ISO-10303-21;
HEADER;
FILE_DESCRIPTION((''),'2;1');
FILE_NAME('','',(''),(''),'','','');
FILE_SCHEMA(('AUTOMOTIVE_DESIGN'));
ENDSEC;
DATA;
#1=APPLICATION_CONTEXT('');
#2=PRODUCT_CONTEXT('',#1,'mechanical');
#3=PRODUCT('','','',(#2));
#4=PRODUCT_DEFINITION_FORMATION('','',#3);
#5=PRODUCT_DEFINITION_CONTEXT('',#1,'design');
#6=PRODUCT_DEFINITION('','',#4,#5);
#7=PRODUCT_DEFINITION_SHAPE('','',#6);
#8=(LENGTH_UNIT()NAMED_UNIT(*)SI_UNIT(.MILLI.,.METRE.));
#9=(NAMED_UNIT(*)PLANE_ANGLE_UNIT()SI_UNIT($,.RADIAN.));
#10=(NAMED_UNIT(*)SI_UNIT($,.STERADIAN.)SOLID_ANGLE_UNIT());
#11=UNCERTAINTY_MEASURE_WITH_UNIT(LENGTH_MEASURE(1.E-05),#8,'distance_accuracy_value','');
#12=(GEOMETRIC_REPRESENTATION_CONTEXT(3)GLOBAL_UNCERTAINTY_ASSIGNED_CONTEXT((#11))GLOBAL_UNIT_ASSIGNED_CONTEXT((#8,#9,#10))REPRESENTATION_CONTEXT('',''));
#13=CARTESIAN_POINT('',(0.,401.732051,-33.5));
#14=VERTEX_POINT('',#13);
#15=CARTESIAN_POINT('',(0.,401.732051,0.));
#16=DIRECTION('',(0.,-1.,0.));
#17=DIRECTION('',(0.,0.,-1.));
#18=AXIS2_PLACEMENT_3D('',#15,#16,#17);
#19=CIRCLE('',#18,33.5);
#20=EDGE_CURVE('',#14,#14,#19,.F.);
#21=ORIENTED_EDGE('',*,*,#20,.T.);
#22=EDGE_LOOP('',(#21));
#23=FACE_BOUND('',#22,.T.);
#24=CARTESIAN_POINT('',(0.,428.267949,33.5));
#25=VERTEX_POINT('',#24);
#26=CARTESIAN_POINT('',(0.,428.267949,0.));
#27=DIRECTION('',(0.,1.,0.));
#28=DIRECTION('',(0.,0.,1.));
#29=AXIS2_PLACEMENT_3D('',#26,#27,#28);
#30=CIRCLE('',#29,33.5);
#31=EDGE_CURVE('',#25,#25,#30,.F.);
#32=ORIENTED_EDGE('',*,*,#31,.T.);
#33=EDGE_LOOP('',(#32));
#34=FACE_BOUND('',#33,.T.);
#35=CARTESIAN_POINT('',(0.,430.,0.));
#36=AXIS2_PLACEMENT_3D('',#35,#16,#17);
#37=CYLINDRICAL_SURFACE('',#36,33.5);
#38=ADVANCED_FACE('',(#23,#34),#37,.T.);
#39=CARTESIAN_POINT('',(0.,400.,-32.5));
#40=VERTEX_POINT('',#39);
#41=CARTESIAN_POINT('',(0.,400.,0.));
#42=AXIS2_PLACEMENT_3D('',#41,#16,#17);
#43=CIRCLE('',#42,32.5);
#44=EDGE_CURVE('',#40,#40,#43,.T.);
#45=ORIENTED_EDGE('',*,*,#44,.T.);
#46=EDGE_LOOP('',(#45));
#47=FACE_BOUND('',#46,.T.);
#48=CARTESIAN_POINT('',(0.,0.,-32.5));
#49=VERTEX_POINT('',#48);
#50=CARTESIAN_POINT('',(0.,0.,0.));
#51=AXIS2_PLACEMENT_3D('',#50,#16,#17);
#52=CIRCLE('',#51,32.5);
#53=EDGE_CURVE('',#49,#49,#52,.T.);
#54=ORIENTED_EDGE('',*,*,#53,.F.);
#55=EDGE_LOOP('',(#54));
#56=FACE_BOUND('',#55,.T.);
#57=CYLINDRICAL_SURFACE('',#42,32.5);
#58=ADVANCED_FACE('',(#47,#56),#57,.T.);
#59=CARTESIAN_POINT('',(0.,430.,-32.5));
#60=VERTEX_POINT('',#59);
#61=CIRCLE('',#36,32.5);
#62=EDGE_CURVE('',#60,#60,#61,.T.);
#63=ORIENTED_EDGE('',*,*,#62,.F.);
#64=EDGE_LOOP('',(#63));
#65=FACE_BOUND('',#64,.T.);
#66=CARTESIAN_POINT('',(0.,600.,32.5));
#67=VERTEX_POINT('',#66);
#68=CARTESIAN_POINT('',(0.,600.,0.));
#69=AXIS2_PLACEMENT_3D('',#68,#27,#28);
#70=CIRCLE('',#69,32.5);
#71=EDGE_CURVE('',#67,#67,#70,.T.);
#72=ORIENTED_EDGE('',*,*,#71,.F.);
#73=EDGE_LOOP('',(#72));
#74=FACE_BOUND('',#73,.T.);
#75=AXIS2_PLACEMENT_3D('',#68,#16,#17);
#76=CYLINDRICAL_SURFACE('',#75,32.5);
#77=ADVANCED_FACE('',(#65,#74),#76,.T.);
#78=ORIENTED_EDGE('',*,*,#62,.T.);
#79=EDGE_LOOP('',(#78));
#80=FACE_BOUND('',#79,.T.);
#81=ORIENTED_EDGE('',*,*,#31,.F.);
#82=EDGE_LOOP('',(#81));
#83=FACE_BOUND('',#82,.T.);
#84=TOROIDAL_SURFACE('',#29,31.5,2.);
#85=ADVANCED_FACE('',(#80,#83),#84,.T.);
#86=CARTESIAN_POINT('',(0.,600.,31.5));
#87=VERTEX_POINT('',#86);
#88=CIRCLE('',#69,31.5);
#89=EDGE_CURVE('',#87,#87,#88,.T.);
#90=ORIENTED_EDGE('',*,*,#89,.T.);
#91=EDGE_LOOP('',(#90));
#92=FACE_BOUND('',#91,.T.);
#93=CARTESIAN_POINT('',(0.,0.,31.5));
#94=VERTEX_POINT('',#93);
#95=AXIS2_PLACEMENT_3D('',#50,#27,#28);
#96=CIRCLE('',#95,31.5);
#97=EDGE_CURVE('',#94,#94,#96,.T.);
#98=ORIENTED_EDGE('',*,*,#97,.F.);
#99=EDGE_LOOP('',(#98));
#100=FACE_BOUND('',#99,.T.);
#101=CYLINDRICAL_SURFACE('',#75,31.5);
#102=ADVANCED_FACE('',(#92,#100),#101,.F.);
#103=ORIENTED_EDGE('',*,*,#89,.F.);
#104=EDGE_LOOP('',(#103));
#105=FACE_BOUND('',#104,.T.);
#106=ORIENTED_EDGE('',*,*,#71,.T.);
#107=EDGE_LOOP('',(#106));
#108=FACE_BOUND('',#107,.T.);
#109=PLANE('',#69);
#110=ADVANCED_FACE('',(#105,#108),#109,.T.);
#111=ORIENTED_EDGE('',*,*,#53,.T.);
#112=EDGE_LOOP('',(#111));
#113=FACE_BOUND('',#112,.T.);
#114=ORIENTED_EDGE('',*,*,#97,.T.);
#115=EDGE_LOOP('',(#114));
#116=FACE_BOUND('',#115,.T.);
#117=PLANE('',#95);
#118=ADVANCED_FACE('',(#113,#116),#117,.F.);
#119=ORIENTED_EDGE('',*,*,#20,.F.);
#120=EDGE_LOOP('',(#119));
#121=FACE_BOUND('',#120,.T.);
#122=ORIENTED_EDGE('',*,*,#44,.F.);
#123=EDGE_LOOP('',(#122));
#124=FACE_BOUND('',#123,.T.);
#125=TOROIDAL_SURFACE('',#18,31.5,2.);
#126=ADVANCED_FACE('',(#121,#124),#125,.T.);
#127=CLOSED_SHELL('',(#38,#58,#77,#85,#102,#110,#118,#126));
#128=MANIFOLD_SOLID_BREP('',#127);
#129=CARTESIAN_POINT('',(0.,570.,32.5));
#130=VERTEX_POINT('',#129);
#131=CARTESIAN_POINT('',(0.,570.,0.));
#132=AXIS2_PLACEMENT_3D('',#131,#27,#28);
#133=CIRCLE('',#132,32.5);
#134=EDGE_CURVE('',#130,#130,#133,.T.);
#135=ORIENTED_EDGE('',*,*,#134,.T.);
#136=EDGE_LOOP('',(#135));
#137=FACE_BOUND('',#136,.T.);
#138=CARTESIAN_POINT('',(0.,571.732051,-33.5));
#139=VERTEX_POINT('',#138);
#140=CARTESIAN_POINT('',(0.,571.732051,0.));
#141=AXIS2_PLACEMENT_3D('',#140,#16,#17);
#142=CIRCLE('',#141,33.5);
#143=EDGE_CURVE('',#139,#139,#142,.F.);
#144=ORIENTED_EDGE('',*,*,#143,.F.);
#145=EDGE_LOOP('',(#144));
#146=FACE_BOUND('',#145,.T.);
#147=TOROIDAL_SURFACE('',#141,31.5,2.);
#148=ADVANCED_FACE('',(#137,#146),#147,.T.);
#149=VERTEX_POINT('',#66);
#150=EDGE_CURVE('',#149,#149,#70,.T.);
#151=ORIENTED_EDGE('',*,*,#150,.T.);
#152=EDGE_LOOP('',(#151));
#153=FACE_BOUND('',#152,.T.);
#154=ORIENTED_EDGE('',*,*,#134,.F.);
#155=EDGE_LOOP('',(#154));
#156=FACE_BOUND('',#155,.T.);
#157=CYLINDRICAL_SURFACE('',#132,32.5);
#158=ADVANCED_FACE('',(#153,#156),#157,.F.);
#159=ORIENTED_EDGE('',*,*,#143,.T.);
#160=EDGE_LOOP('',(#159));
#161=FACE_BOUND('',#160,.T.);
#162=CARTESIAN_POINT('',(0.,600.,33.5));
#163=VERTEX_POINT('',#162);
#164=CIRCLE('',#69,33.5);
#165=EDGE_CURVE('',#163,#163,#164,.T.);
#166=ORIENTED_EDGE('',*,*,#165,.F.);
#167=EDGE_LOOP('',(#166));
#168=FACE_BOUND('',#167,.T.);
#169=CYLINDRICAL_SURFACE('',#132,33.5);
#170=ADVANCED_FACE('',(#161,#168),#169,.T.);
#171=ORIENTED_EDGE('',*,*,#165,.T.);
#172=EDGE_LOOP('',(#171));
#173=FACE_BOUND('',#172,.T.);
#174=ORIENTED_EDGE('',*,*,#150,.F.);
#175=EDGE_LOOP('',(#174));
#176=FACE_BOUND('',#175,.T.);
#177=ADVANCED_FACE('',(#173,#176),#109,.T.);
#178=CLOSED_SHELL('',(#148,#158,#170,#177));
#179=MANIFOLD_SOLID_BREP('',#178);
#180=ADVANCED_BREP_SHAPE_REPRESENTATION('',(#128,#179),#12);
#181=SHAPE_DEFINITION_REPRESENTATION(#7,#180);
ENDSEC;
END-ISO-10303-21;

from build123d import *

# Parameters (mm, degrees)
ESBO_O1_R                = 32.5
ESBO_O1_R_2              = 31.5
RESSALTO_EXTRUS_O1_DEPTH = 600
ESBO_O2_R                = 33.5
ESBO_O2_R_2              = 32.5
RESSALTO_EXTRUS_O2_DEPTH = 30
ESBO_O4_R                = 33.5
ESBO_O4_R_2              = 32.5
RESSALTO_EXTRUS_O3_DEPTH = 430
ESBO_O5_R                = 33.5
ESBO_O5_R_2              = 32.5
CORTE_EXTRUS_O1_DEPTH    = 400
FILETE4_R                = 2
FILETE8_R                = 2
FILETE9_R                = 2


with BuildPart() as part:
    # Esboço1 → Ressalto-extrusão1 (new body)
    with BuildSketch(Plane(origin=(0, 0, 0), x_dir=(1, 0, 0), z_dir=(0, 1, 0))):
        with Locations(Location((0, 0, 0), (0, 0, 270))):
            Circle(ESBO_O1_R)
        with Locations(Location((0, 0, 0), (0, 0, 270))):
            Circle(ESBO_O1_R_2, mode=Mode.SUBTRACT)
    extrude(amount=RESSALTO_EXTRUS_O1_DEPTH)

    # Esboço4 → Ressalto-extrusão3 (add)
    with BuildSketch(Plane.XZ):
        with Locations(Location((0, 0, 0), (0, 0, 90))):
            Circle(ESBO_O4_R)
        with Locations(Location((0, 0, 0), (0, 0, 90))):
            Circle(ESBO_O4_R_2, mode=Mode.SUBTRACT)
    extrude(amount=-RESSALTO_EXTRUS_O3_DEPTH)

    # Esboço5 → Corte-extrusão1 (cut)
    with BuildSketch(Plane.XZ):
        with Locations(Location((0, 0, 0), (0, 0, 90))):
            Circle(ESBO_O5_R)
        with Locations(Location((0, 0, 0), (0, 0, 90))):
            Circle(ESBO_O5_R_2, mode=Mode.SUBTRACT)
    extrude(amount=-CORTE_EXTRUS_O1_DEPTH, mode=Mode.SUBTRACT)

    # Filete4
    # the kernel refuses this fillet: 2 mm, written as the material it takes off along each edge
    with BuildSketch(Plane(origin=(0, 400, 0), x_dir=(0, 0, 1), z_dir=(1, 0, 0))) as filete4_piece_1:
        with BuildLine():
            CenterArc((31.5, -1.732050808), FILETE4_R, 0, 60)
            Line((32.5, 0), (32.52, 0.034641016))
            ThreePointArc((32.52, 0.034641016), (33, 0.04), (33.5, 0.04))
            Line((33.5, 0.04), (33.54, 0))
            Line((33.54, 0), (33.54, -1.732050808))
            Line((33.54, -1.732050808), (33.5, -1.732050808))
        make_face()
    revolve(axis=Axis((0, 400, 0), (0, -1, 0)), mode=Mode.SUBTRACT)

    # Filete8
    # the kernel refuses this fillet: 2 mm, written as the material it takes off along each edge
    with BuildSketch(Plane(origin=(0, 430, 0), x_dir=(0, 0, 1), z_dir=(1, 0, 0))) as filete8_piece_1:
        with BuildLine():
            CenterArc((31.5, 1.732050808), FILETE8_R, 300, 60)
            Line((33.5, 1.732050808), (33.54, 1.732050808))
            Line((33.54, 1.732050808), (33.54, 0))
            Line((33.54, 0), (33.5, -0.04))
            ThreePointArc((33.5, -0.04), (33, -0.04), (32.52, -0.034641016))
            Line((32.52, -0.034641016), (32.5, 0))
        make_face()
    revolve(axis=Axis((0, 430, 0), (0, -1, 0)), mode=Mode.SUBTRACT)


with BuildPart() as body_2:
    # Esboço2 → Ressalto-extrusão2 (new body)
    with BuildSketch(Plane(origin=(0, 600, 0), x_dir=(1, 0, 0), z_dir=(0, 1, 0))):
        with Locations(Location((0, 0, 0), (0, 0, 270))):
            Circle(ESBO_O2_R)
        with Locations(Location((0, 0, 0), (0, 0, 270))):
            Circle(ESBO_O2_R_2, mode=Mode.SUBTRACT)
    extrude(amount=-RESSALTO_EXTRUS_O2_DEPTH)

    # Filete9
    # the kernel refuses this fillet: 2 mm, written as the material it takes off along each edge
    with BuildSketch(Plane(origin=(0, 570, 0), x_dir=(0, 0, 1), z_dir=(-1, 0, 0))) as filete9_piece_1:
        with BuildLine():
            CenterArc((31.5, 1.732050808), FILETE9_R, 300, 60)
            Line((32.5, 0), (32.52, -0.034641016))
            ThreePointArc((32.52, -0.034641016), (33, -0.04), (33.5, -0.04))
            Line((33.5, -0.04), (33.54, 0))
            Line((33.54, 0), (33.54, 1.732050808))
            Line((33.54, 1.732050808), (33.5, 1.732050808))
        make_face()
    revolve(axis=Axis((0, 570, 0), (0, 1, 0)), mode=Mode.SUBTRACT)


solid = Compound([part.part, body_2.part])
